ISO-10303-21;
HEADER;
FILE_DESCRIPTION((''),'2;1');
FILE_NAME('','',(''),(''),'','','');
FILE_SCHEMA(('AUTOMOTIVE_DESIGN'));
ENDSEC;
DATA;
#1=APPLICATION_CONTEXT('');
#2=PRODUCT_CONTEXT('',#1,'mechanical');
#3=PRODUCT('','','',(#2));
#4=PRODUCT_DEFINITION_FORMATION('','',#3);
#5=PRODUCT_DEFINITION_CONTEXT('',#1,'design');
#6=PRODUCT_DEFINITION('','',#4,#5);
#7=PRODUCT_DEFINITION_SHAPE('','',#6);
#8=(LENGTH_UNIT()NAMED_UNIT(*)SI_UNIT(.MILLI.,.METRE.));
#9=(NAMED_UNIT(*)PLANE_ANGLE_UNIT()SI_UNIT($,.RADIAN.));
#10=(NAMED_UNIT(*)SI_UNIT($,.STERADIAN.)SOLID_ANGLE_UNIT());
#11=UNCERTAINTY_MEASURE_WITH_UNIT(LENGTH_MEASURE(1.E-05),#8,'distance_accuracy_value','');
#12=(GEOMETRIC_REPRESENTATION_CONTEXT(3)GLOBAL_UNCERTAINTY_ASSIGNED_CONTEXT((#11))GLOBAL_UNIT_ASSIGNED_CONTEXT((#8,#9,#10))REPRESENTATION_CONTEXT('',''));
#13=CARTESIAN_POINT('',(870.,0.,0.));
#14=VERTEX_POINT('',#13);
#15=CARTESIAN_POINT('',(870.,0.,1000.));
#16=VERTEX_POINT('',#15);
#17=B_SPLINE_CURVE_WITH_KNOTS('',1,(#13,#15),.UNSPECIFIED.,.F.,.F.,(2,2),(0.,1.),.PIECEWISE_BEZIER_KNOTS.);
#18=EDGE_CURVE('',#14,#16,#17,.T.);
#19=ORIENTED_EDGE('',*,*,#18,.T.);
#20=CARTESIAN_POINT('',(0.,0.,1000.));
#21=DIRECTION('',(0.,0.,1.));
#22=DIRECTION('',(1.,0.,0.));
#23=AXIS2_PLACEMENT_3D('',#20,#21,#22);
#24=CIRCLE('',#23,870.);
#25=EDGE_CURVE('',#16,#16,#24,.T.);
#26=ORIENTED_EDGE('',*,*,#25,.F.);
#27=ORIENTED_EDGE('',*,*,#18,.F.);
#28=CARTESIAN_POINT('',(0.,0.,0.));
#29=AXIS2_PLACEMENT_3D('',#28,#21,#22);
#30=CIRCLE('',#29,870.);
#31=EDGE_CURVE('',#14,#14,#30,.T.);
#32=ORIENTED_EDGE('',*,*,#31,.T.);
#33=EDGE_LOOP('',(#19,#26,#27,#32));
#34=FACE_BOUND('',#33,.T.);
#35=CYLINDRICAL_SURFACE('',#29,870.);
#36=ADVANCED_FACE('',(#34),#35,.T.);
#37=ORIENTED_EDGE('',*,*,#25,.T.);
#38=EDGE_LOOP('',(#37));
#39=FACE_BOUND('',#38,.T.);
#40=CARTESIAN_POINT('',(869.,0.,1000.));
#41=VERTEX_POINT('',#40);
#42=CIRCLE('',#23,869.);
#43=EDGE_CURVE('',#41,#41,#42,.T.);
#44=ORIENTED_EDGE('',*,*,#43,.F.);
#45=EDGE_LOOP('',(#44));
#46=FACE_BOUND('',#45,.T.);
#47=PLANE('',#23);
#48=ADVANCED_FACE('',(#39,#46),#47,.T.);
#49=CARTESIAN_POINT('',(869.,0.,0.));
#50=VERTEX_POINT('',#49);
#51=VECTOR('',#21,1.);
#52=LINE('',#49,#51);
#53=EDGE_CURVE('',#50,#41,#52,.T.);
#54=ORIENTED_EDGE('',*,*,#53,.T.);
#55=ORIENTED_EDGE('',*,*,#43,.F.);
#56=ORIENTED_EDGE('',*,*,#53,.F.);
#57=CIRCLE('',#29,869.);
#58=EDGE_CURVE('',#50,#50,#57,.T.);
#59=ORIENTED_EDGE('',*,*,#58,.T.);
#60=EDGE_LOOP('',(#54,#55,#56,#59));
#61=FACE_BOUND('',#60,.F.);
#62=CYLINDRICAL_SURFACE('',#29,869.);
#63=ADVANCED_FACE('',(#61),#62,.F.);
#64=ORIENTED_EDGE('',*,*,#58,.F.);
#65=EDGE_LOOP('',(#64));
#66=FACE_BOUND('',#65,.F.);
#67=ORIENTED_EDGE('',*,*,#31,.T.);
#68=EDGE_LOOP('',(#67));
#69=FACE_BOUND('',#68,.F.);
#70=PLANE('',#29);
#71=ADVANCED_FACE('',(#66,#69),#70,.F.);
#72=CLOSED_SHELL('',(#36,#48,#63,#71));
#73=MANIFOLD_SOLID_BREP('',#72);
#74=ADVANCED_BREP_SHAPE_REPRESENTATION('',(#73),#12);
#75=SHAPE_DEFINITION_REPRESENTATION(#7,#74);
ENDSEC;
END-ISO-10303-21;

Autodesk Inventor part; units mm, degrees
ref_plane "XZ Plane" through (0, 0, 0) normal (0, 1, 0) x (-1, 0, 0)
sketch "Szkic1" plane through (0, 0, 0) normal (0, 0, 1) x (1, 0, 0)
  circle A0 centre (0, 0) radius 870
  line L0 (-870, 0) -> (870, 0) construction
  line L1 (0, -870) -> (0, 870) construction
  dimension "d0" = 1740
ref_plane "Płaszczyzna konstrukcyjna1" through (0, 0, 1000) normal (0, 0, 1) x (1, 0, 0)
sketch "Szkic2" plane through (0, 0, 1000) normal (0, 0, 1) x (1, 0, 0)
  circle A0 centre (0, 0) radius 870
  circle A1 centre (0, 0) radius 870
  line L0 (0, -870) -> (0, 870) construction
  line L1 (-870, 0) -> (870, 0) construction
loft "Wyciągnięcie złożone1" add profiles "Szkic1", "Szkic2"
shell "Skorupa1" thickness 1 removed faces 2 at (213.0416, -16.8792, 1000) at (213.0416, -16.8792, 0)
equation "\"PromieńGięcia\" = Grubość"
equation "\"SzerokośćGięciaPodcięcia\" = Grubość"
equation "\"GłębokośćGięciaPodcięcia\" = 0.5 * Grubość"
equation "\"RozmiarPodcięciaNarożnika\" = 4 * Grubość"
equation "\"MinimalnaPozostałość\" = 2 * Grubość"
equation "\"PromieńPrzejścia\" = PromieńGięcia"
equation "\"Rozmiar_promienia_Jacobiego\" = Grubość"
equation "\"Wielk_odstępu\" = Grubość"
equation "\"Grubość\" = 0.5"
properties part number "bok"
